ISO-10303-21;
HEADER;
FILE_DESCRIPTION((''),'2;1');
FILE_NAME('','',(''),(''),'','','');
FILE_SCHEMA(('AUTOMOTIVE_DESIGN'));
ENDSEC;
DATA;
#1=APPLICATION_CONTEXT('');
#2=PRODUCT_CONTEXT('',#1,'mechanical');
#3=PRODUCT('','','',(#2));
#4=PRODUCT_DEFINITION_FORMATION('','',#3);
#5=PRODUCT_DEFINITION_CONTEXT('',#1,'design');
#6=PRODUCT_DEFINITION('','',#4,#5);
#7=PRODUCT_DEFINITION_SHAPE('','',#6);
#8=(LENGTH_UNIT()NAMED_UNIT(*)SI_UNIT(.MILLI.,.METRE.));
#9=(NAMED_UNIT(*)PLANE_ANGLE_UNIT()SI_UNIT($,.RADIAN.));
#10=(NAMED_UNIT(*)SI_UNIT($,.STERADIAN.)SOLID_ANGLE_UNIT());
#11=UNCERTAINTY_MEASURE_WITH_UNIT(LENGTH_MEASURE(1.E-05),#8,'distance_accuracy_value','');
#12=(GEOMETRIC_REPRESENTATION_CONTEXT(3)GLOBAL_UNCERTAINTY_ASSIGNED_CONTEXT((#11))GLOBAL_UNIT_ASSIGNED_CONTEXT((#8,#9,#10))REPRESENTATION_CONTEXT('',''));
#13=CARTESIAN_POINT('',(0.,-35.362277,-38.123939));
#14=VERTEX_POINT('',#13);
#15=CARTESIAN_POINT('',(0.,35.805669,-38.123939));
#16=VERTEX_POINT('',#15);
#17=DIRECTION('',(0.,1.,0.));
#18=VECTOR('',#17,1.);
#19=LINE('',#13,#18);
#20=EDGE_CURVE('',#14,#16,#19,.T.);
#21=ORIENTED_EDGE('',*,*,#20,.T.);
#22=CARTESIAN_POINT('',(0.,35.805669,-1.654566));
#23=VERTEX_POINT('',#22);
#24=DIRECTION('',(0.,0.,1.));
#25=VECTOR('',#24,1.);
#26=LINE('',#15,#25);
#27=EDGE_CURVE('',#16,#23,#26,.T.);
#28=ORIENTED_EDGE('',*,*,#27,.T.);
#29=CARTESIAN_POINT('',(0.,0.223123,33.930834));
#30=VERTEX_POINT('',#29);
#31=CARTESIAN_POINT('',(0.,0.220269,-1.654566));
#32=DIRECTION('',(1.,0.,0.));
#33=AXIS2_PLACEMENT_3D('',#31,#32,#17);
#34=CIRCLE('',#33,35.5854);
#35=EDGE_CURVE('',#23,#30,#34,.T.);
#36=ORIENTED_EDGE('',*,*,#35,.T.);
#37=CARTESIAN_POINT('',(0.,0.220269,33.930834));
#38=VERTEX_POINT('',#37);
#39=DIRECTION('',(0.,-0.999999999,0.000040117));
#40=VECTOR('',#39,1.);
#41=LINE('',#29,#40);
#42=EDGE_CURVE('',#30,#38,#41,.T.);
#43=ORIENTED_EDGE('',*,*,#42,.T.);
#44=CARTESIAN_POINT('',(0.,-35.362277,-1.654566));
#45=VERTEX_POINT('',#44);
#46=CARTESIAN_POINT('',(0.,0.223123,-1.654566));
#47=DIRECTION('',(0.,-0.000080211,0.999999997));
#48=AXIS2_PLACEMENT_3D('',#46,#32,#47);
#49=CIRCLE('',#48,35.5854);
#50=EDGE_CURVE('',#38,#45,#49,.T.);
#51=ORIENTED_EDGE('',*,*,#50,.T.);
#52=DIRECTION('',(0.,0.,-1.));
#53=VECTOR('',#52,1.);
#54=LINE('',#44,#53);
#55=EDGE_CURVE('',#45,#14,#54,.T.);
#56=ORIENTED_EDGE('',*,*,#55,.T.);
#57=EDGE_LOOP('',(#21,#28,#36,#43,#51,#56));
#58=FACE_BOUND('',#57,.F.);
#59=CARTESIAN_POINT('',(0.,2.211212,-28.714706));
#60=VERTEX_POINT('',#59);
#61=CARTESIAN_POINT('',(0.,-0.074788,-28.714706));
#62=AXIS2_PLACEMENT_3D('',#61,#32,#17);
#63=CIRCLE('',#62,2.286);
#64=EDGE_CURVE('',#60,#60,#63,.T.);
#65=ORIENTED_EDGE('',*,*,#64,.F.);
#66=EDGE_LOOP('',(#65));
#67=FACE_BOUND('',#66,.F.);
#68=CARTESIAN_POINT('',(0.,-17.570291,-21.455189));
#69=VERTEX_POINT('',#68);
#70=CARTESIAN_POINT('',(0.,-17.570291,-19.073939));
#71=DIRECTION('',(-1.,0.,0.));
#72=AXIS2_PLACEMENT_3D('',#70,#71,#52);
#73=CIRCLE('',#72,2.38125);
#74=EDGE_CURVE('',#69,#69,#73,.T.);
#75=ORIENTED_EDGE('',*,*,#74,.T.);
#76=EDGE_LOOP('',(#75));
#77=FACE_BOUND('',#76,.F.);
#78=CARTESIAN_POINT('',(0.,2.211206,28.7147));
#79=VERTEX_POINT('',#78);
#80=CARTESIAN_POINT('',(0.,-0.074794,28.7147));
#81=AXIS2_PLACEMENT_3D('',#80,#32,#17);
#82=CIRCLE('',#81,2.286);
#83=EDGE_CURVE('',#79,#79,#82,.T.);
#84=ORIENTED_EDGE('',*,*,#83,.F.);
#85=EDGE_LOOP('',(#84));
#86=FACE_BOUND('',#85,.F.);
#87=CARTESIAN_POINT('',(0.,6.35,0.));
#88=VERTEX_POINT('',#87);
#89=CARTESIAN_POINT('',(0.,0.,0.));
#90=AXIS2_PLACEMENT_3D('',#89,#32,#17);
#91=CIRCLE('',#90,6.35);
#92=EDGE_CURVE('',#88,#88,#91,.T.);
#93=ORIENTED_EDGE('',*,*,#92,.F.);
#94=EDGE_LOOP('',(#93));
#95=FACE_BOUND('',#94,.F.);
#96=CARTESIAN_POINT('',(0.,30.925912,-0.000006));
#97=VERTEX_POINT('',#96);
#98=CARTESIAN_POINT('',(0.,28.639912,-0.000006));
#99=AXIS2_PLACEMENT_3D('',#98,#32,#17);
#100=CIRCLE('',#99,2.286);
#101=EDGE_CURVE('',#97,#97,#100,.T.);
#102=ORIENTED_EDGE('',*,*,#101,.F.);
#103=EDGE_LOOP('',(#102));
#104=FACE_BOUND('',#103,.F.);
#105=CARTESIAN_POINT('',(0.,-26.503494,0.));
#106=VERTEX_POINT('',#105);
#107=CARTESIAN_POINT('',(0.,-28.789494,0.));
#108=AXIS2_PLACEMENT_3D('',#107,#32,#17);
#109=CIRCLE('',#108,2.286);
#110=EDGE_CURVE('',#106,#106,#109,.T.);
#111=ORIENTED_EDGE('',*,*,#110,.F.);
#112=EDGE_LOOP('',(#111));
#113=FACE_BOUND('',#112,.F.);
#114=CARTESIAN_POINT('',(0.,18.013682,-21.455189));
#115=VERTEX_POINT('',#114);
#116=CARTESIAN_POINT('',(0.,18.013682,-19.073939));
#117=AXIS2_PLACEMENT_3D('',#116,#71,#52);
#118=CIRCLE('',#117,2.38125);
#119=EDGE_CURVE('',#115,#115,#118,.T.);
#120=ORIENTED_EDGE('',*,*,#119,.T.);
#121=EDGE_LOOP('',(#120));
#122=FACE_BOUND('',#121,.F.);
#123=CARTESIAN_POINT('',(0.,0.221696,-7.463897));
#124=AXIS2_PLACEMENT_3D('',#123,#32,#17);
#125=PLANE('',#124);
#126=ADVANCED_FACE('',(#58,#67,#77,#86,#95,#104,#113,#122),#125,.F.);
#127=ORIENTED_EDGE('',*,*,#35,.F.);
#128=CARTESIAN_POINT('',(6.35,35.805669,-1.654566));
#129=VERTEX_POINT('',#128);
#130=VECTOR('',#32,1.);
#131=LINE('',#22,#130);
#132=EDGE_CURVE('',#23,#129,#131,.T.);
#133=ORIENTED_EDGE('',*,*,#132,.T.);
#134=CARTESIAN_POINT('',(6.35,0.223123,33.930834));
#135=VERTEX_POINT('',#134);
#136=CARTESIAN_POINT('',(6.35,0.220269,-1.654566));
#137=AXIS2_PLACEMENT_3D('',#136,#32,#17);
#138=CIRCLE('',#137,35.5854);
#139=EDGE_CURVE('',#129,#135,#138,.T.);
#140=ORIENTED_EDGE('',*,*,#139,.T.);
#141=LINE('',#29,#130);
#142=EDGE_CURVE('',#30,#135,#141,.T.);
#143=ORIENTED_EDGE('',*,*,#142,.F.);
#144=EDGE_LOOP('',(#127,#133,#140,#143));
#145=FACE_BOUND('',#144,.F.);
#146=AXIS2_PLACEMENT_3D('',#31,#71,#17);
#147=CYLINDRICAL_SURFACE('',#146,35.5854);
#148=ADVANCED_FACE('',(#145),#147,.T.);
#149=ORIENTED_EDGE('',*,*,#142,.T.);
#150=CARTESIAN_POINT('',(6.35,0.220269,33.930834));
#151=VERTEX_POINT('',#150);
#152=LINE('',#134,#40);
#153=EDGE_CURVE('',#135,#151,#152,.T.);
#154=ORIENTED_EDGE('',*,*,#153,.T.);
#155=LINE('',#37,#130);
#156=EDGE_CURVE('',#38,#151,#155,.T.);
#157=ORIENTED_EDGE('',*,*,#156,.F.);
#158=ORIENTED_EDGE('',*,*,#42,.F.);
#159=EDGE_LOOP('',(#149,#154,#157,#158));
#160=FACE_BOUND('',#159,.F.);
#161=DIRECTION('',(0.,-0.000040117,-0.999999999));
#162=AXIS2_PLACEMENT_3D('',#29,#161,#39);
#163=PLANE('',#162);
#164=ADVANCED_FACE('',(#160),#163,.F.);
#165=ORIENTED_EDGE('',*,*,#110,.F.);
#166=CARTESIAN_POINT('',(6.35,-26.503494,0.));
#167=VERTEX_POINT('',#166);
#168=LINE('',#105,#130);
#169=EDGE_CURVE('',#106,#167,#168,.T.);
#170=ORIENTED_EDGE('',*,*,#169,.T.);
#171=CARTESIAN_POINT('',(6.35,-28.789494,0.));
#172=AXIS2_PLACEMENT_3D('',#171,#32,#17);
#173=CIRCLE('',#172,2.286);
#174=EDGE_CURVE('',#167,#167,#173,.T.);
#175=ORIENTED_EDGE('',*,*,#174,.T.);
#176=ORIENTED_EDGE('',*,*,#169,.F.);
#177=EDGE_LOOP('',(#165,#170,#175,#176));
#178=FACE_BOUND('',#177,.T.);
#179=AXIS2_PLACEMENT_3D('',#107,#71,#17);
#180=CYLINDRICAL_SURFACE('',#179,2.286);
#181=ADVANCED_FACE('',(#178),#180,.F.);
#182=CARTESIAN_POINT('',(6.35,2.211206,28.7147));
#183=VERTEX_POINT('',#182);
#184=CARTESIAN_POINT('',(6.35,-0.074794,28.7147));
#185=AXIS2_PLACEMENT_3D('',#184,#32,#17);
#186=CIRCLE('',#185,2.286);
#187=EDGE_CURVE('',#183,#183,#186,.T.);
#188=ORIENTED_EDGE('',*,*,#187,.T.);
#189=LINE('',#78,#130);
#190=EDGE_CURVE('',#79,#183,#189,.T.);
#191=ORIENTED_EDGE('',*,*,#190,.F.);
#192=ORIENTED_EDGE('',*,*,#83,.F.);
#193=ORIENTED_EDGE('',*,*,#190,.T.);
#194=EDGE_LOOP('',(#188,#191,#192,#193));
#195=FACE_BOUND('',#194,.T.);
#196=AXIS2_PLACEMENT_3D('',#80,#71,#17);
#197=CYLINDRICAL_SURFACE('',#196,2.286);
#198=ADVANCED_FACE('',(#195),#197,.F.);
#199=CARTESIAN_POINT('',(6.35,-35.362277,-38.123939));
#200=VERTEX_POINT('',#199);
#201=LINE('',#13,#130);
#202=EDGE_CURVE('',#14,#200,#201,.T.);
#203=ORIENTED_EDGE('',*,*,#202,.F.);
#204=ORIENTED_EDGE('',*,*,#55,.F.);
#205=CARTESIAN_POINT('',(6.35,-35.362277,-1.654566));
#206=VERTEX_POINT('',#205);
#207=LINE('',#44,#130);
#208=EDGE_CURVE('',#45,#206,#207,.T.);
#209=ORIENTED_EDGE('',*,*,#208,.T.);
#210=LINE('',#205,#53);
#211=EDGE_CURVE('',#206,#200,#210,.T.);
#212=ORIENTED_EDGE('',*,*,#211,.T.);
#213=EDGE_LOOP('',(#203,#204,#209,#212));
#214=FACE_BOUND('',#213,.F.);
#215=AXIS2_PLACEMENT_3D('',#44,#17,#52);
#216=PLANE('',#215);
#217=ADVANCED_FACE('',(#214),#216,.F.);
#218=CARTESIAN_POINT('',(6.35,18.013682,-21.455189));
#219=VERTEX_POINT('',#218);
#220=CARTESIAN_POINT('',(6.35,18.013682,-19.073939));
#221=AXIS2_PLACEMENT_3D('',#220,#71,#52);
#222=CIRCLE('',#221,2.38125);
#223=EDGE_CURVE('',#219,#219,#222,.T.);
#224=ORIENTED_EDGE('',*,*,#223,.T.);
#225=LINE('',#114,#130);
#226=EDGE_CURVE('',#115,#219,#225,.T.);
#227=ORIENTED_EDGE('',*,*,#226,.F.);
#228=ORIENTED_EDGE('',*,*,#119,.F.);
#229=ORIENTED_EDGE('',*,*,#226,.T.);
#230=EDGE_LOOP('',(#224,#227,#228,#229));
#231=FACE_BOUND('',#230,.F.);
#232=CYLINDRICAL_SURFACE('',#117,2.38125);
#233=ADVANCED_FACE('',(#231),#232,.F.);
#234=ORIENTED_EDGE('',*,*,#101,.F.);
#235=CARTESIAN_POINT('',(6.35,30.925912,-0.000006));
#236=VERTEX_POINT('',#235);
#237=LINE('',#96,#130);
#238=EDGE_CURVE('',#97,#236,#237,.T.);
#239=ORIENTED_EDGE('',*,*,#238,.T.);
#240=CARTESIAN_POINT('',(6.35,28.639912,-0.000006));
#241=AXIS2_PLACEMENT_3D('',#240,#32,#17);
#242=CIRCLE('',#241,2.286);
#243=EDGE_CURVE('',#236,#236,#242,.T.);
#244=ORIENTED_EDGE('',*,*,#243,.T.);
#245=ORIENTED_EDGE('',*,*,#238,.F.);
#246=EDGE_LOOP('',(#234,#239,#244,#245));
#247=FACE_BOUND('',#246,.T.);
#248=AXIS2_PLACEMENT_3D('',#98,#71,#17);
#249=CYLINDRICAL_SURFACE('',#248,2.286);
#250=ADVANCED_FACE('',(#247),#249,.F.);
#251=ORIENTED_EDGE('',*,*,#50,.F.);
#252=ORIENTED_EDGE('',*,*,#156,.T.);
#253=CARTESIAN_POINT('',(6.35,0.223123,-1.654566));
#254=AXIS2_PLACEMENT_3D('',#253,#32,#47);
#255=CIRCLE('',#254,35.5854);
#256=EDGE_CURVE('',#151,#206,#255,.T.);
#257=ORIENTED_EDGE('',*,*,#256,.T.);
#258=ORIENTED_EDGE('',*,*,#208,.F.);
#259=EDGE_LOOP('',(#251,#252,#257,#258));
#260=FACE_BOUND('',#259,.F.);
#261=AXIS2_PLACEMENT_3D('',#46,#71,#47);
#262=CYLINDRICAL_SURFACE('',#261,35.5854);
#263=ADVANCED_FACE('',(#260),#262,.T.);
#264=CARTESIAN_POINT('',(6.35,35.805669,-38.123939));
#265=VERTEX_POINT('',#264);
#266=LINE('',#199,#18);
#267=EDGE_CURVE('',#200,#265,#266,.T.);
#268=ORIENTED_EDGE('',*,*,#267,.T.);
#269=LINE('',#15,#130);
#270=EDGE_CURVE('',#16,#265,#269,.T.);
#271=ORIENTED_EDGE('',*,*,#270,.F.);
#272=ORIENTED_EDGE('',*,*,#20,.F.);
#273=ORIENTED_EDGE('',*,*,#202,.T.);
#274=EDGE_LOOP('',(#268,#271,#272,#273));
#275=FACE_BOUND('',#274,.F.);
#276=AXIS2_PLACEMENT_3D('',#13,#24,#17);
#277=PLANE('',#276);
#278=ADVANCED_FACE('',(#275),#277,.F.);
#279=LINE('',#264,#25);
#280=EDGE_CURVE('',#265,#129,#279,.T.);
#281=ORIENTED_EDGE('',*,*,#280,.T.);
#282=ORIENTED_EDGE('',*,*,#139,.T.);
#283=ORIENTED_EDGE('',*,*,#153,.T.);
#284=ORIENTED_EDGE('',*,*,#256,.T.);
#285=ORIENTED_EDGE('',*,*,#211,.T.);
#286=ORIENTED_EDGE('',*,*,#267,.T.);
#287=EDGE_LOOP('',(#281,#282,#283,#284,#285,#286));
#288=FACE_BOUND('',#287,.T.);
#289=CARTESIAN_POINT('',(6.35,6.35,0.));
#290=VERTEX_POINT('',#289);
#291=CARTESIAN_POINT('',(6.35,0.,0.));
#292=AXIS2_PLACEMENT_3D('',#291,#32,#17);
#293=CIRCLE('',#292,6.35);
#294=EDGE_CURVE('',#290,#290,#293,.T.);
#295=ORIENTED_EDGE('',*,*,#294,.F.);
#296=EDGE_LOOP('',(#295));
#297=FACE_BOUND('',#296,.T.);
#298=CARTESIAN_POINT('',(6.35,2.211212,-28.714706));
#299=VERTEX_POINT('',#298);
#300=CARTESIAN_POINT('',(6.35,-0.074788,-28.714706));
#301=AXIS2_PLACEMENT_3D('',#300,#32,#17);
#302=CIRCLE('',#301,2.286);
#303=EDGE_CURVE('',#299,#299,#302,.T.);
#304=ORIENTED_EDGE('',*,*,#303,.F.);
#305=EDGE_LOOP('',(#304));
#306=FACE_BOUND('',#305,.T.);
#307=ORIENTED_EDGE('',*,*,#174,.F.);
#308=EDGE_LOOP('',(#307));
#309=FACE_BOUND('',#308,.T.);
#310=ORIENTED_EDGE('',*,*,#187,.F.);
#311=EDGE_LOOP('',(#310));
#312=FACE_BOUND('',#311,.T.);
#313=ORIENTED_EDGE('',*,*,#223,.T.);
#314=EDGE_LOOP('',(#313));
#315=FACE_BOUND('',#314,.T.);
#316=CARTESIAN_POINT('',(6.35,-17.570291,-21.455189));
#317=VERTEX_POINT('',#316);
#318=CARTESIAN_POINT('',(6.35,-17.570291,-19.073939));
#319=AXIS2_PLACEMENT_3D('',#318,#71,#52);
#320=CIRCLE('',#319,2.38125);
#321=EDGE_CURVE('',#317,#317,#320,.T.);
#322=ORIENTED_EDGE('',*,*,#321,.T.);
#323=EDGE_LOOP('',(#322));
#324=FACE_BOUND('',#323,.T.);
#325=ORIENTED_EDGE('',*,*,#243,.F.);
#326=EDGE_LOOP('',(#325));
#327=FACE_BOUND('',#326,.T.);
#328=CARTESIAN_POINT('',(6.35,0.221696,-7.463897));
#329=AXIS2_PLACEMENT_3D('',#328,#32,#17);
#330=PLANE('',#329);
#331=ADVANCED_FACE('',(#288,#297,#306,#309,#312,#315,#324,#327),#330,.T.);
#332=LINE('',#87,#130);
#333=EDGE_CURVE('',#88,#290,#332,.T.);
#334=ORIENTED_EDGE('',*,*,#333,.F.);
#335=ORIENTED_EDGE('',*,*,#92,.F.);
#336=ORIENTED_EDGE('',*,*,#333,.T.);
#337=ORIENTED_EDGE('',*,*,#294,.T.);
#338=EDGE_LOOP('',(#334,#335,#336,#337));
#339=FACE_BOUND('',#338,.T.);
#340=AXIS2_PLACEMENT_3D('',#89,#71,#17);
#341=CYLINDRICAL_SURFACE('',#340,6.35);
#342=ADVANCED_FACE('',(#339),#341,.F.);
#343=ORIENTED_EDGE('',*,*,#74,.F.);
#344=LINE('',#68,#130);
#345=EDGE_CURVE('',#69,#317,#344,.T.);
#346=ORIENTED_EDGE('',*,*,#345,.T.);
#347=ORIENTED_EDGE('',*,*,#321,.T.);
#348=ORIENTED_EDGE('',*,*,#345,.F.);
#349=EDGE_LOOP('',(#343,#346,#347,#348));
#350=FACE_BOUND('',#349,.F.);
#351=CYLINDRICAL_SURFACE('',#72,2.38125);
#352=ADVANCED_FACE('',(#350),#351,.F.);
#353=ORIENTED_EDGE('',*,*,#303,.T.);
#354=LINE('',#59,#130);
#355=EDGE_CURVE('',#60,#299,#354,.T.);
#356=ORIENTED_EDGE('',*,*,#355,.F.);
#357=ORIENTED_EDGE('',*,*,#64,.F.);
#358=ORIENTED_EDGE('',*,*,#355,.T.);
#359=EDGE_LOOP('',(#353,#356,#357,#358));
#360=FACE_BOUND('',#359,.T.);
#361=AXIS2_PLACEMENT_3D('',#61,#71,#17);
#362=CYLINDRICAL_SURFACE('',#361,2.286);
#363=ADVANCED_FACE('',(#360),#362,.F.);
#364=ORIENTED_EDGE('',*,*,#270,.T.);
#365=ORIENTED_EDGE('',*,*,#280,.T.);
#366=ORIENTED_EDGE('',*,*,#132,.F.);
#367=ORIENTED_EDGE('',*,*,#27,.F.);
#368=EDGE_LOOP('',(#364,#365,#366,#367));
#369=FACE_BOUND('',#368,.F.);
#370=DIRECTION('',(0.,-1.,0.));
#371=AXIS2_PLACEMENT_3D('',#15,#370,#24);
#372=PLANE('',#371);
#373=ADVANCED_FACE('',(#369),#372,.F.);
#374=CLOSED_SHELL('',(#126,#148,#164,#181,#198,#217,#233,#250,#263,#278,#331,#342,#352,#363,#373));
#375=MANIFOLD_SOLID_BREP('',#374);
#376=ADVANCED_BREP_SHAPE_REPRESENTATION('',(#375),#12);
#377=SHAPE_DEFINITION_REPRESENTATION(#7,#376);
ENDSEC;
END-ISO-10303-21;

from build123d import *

# Parameters (mm, degrees)
F0_R     = 2.286
F0_R_2   = 6.35
F1_DEPTH = 6.35


# Not quite as in the source:
# - ends of sketch curves that miss each other by under 0.0002 mm in the source are joined


with BuildPart() as f1:
    # F0 (on Right) → F1 (new body)
    with BuildSketch(Plane.YZ):
        with BuildLine():
            Line((-35.36227718, -1.6545656172), (-35.36227718, -38.1239391863))
            Line((-35.36227718, -38.1239391863), (-17.5702907145, -38.1239391863))
            Line((-17.5702907145, -38.1239391863), (0.221695751, -38.1239391863))
            Line((0.221695751, -38.1239391863), (18.0136822164, -38.1239391863))
            Line((18.0136822164, -38.1239391863), (35.8056686819, -38.1239391863))
            Line((35.8056686819, -38.1239391863), (35.8056686819, -1.6545656172))
            ThreePointArc((35.8056686819, -1.6545656172), (25.3839554031, 23.5071029235), (0.22312282, 33.9308342683))
            Line((0.22312282, 33.9308342683), (0.2202686819, 33.9308343828))
            ThreePointArc((0.2202686819, 33.9308343828), (-24.9405639012, 23.5071029235), (-35.36227718, -1.6545656172))
        make_face()
        with Locations((-0.074788043, -28.7147061436)):
            Circle(F0_R, mode=Mode.SUBTRACT)
        with BuildLine():
            ThreePointArc((-15.1890407145, -19.0739391863), (-15.8864926918, -20.757737209), (-17.5702907145, -21.4551891863))
            ThreePointArc((-17.5702907145, -21.4551891863), (-19.2540887372, -17.3901411636), (-15.1890407145, -19.0739391863))
        make_face(mode=Mode.SUBTRACT)
        with BuildLine():
            ThreePointArc((20.3949322164, -19.0739391863), (19.6974802391, -20.757737209), (18.0136822164, -21.4551891863))
            ThreePointArc((18.0136822164, -21.4551891863), (16.3298841937, -17.3901411636), (20.3949322164, -19.0739391863))
        make_face(mode=Mode.SUBTRACT)
        with Locations((-28.7894941866, 0)):
            Circle(F0_R, mode=Mode.SUBTRACT)
        Circle(F0_R_2, mode=Mode.SUBTRACT)
        with Locations((-0.0747941866, 28.7147)):
            Circle(F0_R, mode=Mode.SUBTRACT)
        with Locations((28.639911957, -6.1436e-06)):
            Circle(F0_R, mode=Mode.SUBTRACT)
    extrude(amount=F1_DEPTH)


solid = f1.part
